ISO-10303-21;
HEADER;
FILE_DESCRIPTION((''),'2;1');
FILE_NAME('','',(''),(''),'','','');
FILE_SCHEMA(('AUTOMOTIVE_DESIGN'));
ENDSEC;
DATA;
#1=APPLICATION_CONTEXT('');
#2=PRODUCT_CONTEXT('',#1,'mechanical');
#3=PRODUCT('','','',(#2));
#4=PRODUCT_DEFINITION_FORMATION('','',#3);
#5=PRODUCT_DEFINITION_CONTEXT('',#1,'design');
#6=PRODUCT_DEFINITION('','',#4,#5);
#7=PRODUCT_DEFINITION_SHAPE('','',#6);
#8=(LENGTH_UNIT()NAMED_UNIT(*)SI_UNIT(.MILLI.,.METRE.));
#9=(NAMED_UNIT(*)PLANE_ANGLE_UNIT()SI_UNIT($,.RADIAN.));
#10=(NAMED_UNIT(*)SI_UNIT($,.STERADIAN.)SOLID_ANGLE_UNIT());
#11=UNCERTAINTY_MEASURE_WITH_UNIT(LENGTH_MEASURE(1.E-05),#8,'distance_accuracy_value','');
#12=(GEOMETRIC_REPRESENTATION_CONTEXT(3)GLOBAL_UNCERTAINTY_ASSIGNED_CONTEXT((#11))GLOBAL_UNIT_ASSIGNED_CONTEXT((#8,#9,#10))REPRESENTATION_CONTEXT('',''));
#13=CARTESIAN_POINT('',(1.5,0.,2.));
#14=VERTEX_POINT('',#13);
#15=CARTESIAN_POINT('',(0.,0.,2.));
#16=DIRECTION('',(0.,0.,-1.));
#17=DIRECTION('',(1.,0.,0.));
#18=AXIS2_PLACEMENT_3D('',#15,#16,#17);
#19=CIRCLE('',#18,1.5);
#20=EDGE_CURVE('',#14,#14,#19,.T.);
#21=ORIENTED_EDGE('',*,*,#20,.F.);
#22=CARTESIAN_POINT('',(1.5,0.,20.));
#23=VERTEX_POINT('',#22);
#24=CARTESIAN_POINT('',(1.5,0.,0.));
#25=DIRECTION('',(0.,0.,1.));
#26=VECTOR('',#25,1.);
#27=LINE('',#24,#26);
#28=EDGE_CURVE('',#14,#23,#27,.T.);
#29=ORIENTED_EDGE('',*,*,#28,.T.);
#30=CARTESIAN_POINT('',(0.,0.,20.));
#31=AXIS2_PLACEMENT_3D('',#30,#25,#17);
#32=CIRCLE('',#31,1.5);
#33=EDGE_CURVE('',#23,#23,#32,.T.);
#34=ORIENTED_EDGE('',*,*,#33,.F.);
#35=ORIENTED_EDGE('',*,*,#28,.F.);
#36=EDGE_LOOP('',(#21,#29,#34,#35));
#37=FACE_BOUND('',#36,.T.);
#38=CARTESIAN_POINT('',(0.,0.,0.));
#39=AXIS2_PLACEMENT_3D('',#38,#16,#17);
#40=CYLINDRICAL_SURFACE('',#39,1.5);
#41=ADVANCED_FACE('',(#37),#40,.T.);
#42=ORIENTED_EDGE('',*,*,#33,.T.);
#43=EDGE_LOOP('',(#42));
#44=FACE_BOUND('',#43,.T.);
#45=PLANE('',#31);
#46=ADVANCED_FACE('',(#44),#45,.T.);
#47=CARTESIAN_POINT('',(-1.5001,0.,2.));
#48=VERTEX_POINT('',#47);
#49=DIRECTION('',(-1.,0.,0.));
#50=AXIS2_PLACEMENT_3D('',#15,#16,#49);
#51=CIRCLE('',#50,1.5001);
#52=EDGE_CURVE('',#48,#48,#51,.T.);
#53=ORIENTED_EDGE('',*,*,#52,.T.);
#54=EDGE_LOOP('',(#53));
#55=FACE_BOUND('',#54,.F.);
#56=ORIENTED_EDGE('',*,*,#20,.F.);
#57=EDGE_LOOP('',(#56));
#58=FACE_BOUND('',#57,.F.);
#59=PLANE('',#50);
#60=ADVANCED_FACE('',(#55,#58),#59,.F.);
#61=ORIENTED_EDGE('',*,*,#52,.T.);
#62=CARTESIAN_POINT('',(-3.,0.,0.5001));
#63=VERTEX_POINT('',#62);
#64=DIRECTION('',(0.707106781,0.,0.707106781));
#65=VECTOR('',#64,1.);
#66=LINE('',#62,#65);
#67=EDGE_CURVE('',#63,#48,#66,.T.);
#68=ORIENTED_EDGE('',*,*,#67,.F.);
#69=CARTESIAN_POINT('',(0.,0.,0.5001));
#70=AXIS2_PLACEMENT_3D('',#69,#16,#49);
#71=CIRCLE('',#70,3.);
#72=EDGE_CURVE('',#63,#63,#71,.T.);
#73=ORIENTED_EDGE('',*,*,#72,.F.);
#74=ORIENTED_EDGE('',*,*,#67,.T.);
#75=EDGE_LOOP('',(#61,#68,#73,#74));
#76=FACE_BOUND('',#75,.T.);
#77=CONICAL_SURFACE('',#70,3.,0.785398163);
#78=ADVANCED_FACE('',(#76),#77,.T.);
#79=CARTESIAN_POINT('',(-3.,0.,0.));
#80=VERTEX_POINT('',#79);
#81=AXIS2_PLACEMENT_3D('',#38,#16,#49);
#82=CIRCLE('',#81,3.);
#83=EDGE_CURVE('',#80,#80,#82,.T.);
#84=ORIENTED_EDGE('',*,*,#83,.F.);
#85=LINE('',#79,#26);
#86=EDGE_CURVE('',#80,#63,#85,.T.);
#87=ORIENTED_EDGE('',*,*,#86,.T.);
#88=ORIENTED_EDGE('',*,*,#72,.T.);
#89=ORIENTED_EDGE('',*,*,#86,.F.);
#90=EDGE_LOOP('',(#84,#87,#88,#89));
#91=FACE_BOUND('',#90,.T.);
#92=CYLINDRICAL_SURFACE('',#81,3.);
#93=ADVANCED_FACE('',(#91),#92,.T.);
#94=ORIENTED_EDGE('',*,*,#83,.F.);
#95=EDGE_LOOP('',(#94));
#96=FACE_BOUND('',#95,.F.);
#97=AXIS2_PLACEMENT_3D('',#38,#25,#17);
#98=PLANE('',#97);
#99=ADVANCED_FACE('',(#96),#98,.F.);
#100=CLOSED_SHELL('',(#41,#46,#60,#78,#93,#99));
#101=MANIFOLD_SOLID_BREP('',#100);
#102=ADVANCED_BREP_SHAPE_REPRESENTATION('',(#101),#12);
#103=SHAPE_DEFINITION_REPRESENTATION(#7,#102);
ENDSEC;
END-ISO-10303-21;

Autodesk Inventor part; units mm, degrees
ref_plane "YZ Plane" through (0, 0, 0) normal (1, 0, 0) x (0, 1, 0)
ref_plane "XZ Plane" through (0, 0, 0) normal (0, 1, 0) x (-1, 0, 0)
ref_plane "XY Plane" through (0, 0, 0) normal (0, 0, 1) x (1, 0, 0)
sketch "スケッチ1" plane through (0, 0, 0) normal (0, 0, 1) x (1, 0, 0)
  circle A0 centre (0, 0) radius 1.5
  dimension "d0" = 3
extrude "押し出し1" add sketch "スケッチ1" along normal blind 20
sketch "スケッチ2" plane through (0, 0, 0) normal (0, 0, -1) x (-1, 0, 0)
  circle A0 centre (0, 0) radius 3
  dimension "d3" = 6
extrude "押し出し2" add sketch "スケッチ2" against normal blind 2
thread "ねじ1" size "M3x0.5" class "6g" standard "ANSI Metric M Profile" full length
chamfer "面取り1" distance 1.5 angle 45 1 edges at (3, 0, 2)
properties part number "ネジ皿m3,20" material "鋼、高強度、低合金"
